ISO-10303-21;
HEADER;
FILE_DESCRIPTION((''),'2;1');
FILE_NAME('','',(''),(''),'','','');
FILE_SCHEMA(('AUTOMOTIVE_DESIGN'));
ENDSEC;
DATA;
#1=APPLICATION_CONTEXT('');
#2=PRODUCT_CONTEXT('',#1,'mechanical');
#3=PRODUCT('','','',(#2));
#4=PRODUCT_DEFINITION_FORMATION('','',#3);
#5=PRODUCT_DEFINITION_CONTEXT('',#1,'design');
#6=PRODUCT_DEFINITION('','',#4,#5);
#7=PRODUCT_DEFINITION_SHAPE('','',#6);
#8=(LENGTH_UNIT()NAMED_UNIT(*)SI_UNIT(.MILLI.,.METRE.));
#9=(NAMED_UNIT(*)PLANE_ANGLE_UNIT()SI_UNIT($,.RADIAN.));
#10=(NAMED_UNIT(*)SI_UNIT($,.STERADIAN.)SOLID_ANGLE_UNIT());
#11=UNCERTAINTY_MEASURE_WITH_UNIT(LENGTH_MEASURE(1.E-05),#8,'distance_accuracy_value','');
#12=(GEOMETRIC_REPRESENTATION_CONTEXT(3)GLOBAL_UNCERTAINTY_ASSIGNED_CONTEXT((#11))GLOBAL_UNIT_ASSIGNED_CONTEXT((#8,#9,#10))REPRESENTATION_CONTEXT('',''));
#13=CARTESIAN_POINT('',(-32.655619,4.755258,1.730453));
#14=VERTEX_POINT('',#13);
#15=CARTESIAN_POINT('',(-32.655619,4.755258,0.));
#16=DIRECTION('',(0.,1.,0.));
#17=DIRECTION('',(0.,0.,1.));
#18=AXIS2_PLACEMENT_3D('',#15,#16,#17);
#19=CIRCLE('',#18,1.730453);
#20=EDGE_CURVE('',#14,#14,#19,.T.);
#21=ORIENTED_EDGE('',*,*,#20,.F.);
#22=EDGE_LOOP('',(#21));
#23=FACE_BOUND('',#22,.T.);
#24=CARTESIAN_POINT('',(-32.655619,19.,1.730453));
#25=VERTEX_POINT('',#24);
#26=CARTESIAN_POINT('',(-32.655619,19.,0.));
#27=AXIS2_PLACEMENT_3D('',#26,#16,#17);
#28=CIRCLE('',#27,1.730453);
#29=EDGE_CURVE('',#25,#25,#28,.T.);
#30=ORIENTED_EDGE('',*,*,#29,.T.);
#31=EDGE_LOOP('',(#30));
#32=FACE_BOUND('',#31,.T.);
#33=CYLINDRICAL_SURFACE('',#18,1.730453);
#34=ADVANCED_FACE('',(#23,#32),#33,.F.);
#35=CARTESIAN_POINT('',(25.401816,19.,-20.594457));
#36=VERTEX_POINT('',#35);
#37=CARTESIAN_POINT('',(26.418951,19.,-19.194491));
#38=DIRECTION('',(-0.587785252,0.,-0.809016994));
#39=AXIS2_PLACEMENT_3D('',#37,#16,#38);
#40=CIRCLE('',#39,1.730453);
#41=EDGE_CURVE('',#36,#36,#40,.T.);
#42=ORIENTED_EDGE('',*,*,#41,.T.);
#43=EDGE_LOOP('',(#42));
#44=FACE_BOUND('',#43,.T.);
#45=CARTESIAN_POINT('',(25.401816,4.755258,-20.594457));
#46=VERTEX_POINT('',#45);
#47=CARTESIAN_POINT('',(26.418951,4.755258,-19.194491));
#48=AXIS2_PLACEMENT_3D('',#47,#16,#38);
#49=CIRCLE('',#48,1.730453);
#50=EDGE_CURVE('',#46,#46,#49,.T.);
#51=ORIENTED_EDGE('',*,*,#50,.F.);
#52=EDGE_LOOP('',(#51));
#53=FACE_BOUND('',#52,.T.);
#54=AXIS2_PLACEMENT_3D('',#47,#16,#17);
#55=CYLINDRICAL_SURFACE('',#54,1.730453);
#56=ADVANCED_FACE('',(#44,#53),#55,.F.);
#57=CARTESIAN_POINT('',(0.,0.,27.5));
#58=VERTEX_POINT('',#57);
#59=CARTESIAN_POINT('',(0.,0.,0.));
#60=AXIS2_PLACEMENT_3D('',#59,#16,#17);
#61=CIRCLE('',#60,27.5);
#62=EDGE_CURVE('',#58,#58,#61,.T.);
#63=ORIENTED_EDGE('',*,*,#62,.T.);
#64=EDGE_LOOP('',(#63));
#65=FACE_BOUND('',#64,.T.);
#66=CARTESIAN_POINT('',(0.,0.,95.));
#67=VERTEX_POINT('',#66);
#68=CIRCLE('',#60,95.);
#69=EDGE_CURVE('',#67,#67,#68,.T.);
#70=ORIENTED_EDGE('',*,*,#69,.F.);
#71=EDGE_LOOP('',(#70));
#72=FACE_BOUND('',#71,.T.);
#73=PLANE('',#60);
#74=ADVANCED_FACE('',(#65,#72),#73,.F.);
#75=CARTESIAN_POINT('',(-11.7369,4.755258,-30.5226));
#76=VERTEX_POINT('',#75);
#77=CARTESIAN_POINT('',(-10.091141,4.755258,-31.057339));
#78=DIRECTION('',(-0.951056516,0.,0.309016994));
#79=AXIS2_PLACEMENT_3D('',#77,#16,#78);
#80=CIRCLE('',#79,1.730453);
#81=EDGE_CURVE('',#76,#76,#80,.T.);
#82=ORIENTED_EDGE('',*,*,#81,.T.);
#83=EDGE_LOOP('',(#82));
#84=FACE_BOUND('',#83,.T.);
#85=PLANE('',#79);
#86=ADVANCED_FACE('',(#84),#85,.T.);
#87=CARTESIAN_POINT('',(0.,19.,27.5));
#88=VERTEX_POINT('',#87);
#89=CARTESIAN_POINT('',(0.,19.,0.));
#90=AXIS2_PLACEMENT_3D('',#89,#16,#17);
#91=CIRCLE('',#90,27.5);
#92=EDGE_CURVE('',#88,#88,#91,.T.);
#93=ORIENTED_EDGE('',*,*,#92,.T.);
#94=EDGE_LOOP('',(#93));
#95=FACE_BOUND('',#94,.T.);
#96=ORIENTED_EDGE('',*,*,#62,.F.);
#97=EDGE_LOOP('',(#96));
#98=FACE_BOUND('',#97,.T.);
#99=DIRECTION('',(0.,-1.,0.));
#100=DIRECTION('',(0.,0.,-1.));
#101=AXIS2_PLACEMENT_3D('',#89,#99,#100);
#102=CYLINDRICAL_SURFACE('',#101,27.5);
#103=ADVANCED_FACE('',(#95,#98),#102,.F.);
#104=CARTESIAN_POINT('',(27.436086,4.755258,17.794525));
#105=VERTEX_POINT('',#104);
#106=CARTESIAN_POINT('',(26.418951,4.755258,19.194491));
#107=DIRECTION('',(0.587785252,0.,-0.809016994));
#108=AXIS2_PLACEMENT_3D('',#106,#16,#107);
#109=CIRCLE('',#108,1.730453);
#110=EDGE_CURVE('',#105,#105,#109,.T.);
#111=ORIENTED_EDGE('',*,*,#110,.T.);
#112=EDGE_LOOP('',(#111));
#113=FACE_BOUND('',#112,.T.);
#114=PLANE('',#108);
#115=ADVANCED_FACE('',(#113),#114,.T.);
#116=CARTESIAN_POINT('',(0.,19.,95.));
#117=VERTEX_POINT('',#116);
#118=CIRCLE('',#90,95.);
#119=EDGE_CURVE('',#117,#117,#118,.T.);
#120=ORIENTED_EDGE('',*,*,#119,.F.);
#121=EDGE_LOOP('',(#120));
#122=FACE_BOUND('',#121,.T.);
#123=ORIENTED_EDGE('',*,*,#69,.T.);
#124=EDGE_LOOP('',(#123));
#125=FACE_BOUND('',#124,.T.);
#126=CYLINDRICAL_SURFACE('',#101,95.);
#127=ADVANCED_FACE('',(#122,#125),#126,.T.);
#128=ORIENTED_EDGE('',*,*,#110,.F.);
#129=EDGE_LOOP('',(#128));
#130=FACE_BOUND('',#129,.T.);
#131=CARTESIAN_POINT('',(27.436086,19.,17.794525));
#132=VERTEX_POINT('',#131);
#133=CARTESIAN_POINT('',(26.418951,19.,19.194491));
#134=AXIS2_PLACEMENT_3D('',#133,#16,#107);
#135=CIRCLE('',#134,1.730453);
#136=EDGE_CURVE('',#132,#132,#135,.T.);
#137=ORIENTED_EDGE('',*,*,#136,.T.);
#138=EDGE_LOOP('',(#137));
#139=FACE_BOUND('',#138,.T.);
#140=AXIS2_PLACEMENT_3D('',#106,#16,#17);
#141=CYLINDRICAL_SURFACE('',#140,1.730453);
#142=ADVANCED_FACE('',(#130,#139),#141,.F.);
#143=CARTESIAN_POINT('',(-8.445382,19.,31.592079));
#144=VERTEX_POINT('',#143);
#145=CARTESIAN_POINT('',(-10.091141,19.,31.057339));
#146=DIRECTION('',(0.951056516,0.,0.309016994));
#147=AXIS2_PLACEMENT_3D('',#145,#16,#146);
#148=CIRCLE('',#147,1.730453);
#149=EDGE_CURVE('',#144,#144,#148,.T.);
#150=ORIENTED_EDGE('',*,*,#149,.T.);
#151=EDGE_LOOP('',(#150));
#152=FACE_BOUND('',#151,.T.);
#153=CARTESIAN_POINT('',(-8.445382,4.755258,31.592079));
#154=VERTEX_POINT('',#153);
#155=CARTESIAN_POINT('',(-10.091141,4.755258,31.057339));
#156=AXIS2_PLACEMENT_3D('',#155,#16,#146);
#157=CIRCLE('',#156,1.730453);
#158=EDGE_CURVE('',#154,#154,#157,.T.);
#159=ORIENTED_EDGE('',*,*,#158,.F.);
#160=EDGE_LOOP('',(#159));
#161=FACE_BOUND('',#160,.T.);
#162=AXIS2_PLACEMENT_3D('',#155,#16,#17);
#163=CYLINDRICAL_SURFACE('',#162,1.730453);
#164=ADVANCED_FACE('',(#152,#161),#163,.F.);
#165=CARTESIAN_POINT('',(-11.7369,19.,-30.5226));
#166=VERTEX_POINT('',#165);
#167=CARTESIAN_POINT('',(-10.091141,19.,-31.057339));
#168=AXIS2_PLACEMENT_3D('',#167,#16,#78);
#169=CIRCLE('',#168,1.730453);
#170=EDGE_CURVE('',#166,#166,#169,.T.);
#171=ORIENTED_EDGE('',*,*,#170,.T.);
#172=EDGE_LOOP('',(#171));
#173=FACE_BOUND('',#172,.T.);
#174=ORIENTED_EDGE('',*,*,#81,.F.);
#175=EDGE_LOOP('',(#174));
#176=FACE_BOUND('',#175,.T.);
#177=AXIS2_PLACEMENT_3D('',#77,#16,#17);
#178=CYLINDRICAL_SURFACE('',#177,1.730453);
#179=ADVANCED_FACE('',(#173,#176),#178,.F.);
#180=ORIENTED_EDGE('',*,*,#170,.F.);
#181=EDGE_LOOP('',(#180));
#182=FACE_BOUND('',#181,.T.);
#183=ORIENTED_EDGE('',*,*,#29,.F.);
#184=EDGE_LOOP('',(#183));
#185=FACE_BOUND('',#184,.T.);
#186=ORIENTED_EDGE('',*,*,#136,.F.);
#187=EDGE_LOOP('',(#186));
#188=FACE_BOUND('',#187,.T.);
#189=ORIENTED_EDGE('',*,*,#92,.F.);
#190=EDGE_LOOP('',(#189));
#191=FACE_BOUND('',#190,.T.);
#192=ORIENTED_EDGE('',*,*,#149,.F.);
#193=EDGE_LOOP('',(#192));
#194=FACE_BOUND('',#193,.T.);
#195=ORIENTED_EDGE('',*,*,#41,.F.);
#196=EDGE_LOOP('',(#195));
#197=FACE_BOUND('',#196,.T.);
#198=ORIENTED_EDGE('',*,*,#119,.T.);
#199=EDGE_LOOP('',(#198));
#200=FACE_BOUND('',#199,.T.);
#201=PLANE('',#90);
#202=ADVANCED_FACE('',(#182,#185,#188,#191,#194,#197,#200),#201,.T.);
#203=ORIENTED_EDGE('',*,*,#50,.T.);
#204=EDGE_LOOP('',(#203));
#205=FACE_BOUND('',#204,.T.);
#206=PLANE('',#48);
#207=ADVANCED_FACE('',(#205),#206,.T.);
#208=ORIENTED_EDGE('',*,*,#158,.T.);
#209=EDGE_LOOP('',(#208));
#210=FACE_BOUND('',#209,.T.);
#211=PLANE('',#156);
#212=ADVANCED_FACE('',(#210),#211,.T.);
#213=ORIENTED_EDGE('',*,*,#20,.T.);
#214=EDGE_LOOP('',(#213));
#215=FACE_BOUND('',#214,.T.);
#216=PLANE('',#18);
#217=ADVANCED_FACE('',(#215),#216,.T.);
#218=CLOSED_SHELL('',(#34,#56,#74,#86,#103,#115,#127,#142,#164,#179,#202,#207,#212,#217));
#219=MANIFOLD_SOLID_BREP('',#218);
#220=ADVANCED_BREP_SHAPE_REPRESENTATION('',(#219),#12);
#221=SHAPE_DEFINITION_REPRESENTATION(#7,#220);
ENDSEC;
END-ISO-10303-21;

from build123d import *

# Parameters (mm, degrees)
SKETCH1_R           = 95
BOSS_EXTRUDE1_DEPTH = 19
SKETCH2_R           = 27.5
CUT_EXTRUDE1_DEPTH  = 136.687140142
SKETCH3_R           = 1.730453225
CUT_EXTRUDE2_DEPTH  = 14.244742321
CIRPATTERN1_COUNT   = 5


with BuildPart() as part:
    # Sketch1 → Boss-Extrude1 (new body)
    with BuildSketch(Plane(origin=(0, 0, 0), x_dir=(1, 0, 0), z_dir=(0, 1, 0))):
        Circle(SKETCH1_R)
    extrude(amount=BOSS_EXTRUDE1_DEPTH)

    # Sketch2 → Cut-Extrude1 (cut, through all)
    with BuildSketch(Plane(origin=(0, 0, 0), x_dir=(1, 0, 0), z_dir=(0, 1, 0))):
        Circle(SKETCH2_R)
    extrude(amount=CUT_EXTRUDE1_DEPTH, mode=Mode.SUBTRACT)

    # Sketch3 → Cut-Extrude2 (cut)
    with BuildSketch(Plane(origin=(0, 19, 0), x_dir=(1, 0, 0), z_dir=(0, 1, 0))):
        with Locations((-32.655618967, 0)):
            Circle(SKETCH3_R)
    cut_extrude2 = extrude(amount=-CUT_EXTRUDE2_DEPTH, mode=Mode.SUBTRACT)

    # CirPattern1: Cut-Extrude2 ×5 about axis
    cirpattern1_axis = Axis((0, 0, 0), (0, 1, 0))
    for i in range(1, CIRPATTERN1_COUNT):
        add(cut_extrude2.rotate(cirpattern1_axis, i * 360 / CIRPATTERN1_COUNT), mode=Mode.SUBTRACT)


solid = part.part
